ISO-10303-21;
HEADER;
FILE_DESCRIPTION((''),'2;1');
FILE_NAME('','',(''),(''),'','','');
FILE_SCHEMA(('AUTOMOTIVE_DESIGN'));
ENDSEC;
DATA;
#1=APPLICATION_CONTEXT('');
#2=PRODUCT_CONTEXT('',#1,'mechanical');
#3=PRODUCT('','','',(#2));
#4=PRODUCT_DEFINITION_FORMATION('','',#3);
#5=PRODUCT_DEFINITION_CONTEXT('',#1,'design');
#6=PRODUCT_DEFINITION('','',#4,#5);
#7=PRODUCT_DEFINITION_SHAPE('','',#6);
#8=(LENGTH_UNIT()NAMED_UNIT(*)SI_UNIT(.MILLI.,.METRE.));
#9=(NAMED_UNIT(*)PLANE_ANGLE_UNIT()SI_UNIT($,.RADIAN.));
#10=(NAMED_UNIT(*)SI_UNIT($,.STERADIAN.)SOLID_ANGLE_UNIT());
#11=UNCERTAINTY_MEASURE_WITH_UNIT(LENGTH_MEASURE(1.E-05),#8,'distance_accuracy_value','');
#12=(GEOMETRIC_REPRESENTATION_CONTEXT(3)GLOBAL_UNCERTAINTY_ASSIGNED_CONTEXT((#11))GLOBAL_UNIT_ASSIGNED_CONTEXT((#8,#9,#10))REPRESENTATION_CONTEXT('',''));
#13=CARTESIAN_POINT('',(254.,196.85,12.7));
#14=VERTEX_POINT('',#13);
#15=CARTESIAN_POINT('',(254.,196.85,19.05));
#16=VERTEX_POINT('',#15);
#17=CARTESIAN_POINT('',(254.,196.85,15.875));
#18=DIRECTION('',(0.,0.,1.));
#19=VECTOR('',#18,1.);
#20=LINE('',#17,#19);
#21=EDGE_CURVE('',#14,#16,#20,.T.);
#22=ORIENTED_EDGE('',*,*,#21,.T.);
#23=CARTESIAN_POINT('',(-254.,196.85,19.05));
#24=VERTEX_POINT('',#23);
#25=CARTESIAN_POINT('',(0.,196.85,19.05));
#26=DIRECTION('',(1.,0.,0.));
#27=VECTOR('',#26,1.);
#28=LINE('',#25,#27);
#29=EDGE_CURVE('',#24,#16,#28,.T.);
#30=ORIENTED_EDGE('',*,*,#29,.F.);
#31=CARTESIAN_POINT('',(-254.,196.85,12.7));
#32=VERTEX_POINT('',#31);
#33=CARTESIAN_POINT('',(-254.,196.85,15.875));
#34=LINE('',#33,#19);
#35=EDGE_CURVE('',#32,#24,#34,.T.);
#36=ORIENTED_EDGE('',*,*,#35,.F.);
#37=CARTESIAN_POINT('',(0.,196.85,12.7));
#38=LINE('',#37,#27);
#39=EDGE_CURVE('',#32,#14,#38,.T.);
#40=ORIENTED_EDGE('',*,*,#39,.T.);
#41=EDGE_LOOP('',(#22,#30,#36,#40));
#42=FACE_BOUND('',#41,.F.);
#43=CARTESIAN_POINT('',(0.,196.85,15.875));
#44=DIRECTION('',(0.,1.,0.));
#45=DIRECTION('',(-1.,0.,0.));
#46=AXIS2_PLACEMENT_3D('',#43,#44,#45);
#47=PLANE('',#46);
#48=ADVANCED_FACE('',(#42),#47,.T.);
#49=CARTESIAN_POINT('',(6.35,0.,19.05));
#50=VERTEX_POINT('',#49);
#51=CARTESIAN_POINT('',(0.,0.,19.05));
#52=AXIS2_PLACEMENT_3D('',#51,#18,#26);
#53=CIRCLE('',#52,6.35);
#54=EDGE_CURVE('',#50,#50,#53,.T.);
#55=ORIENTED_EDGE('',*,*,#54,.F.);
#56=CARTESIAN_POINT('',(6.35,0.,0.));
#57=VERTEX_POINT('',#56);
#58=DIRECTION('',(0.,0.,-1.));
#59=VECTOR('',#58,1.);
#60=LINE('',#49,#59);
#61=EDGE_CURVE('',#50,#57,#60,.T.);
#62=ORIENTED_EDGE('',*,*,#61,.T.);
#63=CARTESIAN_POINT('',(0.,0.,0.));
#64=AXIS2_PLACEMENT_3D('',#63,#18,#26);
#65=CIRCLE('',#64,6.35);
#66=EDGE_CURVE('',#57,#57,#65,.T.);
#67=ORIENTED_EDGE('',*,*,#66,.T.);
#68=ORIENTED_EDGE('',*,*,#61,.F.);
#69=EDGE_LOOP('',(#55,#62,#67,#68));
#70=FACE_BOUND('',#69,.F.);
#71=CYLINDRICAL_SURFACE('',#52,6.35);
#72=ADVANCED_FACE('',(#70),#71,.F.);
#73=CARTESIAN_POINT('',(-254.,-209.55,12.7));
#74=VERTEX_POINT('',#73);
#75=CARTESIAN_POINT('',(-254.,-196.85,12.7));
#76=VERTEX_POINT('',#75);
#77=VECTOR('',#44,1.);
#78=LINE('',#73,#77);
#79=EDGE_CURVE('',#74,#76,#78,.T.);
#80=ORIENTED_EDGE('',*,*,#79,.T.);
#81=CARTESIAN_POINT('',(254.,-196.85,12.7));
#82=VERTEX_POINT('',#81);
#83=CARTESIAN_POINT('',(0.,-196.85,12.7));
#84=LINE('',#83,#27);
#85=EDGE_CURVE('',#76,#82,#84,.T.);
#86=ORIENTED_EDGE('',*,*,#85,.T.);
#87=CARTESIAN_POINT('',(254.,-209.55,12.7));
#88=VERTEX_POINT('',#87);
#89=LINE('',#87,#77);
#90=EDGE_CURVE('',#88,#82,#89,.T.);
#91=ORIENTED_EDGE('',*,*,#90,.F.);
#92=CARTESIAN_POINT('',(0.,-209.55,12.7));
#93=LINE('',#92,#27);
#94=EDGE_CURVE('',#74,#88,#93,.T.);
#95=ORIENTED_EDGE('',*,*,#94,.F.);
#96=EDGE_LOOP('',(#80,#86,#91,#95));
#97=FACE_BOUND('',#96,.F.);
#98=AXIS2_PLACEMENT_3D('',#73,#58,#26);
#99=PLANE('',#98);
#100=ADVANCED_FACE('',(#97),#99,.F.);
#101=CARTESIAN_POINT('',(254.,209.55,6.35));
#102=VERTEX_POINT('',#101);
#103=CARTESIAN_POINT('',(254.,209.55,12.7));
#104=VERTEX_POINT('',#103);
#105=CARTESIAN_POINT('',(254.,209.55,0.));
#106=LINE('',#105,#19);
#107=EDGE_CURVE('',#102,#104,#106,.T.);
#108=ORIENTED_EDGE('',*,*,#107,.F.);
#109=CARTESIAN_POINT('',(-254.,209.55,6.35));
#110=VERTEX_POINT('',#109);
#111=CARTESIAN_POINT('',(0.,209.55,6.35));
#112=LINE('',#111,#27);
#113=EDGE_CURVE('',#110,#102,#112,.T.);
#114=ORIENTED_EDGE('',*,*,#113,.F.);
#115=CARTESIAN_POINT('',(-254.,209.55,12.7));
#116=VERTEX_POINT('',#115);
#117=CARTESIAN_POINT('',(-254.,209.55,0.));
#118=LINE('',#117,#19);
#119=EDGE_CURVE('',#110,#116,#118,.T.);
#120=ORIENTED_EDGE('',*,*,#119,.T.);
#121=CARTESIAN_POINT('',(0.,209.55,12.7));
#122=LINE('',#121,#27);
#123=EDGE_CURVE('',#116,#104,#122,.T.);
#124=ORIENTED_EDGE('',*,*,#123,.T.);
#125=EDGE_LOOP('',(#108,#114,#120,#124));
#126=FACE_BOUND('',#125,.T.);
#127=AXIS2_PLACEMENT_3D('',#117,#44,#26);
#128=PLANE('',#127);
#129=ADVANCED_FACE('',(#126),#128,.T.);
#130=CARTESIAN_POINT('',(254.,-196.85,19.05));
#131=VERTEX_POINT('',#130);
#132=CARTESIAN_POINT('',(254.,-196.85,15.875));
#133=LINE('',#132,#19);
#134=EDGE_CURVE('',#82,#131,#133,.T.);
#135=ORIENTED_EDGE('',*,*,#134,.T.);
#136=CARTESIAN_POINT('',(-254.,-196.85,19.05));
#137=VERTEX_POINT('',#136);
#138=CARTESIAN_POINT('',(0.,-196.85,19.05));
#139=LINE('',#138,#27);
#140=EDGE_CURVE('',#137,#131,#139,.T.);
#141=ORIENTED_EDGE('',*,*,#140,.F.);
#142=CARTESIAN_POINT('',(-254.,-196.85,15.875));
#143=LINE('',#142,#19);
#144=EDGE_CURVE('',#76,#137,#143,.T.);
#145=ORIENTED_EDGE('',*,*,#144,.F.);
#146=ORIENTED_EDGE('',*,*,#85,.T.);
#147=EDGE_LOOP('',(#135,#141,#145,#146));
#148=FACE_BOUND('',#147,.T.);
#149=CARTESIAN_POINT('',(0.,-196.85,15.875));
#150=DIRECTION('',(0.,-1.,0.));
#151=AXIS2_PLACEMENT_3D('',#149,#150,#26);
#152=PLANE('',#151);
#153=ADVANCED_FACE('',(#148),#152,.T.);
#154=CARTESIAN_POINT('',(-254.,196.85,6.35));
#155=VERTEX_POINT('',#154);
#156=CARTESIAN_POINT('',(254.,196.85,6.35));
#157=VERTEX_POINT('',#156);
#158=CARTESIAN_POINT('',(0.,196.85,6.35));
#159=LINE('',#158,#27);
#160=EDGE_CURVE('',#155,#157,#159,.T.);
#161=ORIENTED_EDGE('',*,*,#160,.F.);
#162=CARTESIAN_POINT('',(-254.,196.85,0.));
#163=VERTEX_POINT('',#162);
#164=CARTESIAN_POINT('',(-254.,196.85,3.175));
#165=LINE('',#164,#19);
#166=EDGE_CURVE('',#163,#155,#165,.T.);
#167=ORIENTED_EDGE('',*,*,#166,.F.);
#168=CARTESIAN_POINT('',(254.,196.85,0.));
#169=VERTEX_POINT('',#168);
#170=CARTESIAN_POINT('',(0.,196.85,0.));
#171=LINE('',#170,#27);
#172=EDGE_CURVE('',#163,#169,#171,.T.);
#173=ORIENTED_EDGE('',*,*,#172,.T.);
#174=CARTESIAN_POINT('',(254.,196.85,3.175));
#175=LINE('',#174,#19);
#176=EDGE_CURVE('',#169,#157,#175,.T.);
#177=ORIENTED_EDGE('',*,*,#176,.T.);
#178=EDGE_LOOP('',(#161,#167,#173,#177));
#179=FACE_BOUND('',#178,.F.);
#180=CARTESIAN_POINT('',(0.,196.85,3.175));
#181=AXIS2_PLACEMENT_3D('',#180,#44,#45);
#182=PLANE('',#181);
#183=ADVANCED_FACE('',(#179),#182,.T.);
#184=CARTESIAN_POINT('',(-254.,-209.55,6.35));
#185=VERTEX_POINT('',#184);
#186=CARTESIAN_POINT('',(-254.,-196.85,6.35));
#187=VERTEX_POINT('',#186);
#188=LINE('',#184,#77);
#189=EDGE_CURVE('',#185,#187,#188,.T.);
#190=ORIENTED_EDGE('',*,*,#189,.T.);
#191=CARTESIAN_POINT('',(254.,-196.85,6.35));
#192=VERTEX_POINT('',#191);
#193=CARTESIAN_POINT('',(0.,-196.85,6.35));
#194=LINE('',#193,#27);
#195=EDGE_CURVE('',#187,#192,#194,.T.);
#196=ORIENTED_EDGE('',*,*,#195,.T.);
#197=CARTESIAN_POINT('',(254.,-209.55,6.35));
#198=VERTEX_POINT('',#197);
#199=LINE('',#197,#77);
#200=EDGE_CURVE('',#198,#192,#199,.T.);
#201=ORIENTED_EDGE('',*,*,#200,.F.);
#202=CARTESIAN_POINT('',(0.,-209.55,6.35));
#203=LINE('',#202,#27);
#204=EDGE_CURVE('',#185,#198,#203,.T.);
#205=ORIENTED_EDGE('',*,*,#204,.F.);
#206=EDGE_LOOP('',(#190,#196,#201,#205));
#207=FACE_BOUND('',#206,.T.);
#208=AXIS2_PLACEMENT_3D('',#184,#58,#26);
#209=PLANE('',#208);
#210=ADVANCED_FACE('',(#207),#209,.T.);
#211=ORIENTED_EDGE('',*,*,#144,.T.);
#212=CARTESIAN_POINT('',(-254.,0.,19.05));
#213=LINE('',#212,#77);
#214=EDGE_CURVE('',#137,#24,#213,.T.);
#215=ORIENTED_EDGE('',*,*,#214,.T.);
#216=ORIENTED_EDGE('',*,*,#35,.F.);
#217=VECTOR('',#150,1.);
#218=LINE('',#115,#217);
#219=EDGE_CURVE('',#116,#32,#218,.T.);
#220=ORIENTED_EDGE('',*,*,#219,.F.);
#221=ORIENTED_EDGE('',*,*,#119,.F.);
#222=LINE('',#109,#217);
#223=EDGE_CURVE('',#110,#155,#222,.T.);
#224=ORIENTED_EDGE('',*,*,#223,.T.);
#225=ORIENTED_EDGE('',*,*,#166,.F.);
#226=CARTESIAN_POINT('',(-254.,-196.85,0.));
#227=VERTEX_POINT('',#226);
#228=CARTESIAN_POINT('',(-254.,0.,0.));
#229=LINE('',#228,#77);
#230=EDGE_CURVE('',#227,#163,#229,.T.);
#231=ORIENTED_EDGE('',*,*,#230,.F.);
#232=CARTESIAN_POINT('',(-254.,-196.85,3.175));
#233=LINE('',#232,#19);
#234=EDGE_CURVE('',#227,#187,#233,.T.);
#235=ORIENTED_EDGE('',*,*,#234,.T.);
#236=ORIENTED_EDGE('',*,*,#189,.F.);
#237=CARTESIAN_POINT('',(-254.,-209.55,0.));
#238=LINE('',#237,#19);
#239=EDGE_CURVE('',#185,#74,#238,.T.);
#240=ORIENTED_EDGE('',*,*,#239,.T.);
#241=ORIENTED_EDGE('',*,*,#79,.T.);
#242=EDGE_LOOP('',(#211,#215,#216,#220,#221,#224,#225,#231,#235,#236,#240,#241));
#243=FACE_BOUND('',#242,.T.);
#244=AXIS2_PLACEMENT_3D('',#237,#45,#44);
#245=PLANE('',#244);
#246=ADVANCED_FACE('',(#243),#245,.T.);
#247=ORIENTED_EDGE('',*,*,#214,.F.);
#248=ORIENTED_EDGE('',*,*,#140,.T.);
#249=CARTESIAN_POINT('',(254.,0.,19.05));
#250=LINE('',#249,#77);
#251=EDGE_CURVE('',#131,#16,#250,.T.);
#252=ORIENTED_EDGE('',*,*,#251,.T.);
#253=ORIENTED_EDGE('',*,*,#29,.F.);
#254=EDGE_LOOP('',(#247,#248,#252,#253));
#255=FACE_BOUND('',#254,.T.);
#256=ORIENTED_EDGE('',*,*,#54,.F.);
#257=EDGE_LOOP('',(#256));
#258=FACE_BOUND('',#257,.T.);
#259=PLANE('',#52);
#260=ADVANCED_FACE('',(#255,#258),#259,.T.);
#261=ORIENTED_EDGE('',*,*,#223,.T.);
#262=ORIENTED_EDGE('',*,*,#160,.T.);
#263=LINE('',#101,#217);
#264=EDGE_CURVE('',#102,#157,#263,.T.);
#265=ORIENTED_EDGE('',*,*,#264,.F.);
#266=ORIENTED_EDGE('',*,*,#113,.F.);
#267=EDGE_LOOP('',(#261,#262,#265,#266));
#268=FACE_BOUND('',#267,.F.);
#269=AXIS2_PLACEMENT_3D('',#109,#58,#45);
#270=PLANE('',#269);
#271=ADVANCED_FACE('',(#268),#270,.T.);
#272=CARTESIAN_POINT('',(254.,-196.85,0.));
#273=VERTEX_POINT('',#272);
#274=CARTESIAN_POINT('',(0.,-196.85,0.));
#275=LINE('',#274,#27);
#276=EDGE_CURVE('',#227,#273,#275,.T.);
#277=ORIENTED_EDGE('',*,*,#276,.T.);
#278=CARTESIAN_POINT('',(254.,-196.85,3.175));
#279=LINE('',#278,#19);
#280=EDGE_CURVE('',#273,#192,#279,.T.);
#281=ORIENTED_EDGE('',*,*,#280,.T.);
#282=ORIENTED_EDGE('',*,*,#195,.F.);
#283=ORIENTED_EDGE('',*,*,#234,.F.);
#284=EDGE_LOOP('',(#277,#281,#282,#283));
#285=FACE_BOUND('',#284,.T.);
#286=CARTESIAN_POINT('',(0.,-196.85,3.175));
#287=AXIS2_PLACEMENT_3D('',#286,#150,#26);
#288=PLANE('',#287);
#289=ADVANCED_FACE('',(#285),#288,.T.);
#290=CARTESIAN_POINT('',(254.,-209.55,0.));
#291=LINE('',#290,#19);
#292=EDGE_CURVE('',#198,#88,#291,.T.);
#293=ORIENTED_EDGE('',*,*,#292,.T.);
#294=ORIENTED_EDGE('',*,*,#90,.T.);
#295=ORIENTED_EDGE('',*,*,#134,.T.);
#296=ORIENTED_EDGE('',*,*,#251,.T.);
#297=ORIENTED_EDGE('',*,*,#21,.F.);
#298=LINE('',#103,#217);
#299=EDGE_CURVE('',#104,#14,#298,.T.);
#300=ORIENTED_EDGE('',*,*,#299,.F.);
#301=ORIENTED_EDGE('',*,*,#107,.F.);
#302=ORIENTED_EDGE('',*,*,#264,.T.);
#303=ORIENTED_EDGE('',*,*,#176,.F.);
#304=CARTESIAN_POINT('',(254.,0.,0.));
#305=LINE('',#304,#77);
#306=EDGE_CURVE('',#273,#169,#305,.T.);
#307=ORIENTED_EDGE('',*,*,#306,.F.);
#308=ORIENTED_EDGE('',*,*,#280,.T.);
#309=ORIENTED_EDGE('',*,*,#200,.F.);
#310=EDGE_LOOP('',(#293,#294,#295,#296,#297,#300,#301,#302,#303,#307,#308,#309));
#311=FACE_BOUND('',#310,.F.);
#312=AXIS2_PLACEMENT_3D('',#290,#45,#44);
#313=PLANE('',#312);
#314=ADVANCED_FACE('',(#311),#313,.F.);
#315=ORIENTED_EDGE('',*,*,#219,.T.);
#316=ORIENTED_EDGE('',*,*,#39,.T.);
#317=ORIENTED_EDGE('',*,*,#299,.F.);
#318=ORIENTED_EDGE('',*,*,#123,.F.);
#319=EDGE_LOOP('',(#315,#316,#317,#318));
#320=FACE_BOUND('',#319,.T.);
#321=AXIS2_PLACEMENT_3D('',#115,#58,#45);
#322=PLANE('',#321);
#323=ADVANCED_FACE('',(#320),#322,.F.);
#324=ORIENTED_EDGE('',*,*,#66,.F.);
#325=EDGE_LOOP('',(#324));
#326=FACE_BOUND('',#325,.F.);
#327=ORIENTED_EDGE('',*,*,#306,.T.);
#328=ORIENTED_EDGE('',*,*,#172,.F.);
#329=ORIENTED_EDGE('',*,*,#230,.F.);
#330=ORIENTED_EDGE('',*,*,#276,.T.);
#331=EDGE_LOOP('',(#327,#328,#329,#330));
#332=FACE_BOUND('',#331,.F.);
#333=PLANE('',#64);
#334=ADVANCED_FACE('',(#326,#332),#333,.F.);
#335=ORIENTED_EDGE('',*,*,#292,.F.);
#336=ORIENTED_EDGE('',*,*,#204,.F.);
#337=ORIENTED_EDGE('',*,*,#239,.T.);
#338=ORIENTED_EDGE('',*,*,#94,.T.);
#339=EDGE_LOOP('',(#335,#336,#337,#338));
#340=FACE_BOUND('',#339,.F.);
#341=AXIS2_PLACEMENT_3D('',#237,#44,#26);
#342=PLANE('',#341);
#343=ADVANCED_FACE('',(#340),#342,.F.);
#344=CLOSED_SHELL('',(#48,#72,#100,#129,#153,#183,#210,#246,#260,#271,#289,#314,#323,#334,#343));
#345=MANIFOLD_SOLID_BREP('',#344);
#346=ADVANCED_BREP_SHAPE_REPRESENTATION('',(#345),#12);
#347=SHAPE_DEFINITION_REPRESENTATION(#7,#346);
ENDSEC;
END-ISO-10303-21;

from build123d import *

# Parameters (mm, degrees)
F0_W     = 508
F0_H     = 419.1
F1_DEPTH = 19.05
F2_W     = 508
F2_H     = 6.35
F3_DEPTH = 12.7
F4_R     = 6.35
F5_DEPTH = 19.051


# Not quite as in the source:
# - a pattern or mirror of a feature is missing from the dataset's text; its kind, count and spacing are read off the source's solid


with BuildPart() as f1:
    # F0 (on Top) → F1 (new body)
    with BuildSketch(Plane.XY):
        Rectangle(F0_W, F0_H)
    extrude(amount=F1_DEPTH)

    # F2 (on face) → F3 (cut)
    with BuildSketch(Plane.XZ.offset(209.55)):
        with Locations((0, 3.175)):
            Rectangle(F2_W, F2_H)
        with Locations((0, 15.875)):
            Rectangle(F2_W, F2_H)
    f3 = extrude(amount=-F3_DEPTH, mode=Mode.SUBTRACT)

    # F3_copies: F3 across plane
    add(f3.mirror(Plane.ZX), mode=Mode.SUBTRACT)

    # F4 (on face) → F5 (cut, through all)
    with BuildSketch(Plane.XY.offset(19.05)):
        Circle(F4_R)
    extrude(amount=-F5_DEPTH, mode=Mode.SUBTRACT)


solid = f1.part
